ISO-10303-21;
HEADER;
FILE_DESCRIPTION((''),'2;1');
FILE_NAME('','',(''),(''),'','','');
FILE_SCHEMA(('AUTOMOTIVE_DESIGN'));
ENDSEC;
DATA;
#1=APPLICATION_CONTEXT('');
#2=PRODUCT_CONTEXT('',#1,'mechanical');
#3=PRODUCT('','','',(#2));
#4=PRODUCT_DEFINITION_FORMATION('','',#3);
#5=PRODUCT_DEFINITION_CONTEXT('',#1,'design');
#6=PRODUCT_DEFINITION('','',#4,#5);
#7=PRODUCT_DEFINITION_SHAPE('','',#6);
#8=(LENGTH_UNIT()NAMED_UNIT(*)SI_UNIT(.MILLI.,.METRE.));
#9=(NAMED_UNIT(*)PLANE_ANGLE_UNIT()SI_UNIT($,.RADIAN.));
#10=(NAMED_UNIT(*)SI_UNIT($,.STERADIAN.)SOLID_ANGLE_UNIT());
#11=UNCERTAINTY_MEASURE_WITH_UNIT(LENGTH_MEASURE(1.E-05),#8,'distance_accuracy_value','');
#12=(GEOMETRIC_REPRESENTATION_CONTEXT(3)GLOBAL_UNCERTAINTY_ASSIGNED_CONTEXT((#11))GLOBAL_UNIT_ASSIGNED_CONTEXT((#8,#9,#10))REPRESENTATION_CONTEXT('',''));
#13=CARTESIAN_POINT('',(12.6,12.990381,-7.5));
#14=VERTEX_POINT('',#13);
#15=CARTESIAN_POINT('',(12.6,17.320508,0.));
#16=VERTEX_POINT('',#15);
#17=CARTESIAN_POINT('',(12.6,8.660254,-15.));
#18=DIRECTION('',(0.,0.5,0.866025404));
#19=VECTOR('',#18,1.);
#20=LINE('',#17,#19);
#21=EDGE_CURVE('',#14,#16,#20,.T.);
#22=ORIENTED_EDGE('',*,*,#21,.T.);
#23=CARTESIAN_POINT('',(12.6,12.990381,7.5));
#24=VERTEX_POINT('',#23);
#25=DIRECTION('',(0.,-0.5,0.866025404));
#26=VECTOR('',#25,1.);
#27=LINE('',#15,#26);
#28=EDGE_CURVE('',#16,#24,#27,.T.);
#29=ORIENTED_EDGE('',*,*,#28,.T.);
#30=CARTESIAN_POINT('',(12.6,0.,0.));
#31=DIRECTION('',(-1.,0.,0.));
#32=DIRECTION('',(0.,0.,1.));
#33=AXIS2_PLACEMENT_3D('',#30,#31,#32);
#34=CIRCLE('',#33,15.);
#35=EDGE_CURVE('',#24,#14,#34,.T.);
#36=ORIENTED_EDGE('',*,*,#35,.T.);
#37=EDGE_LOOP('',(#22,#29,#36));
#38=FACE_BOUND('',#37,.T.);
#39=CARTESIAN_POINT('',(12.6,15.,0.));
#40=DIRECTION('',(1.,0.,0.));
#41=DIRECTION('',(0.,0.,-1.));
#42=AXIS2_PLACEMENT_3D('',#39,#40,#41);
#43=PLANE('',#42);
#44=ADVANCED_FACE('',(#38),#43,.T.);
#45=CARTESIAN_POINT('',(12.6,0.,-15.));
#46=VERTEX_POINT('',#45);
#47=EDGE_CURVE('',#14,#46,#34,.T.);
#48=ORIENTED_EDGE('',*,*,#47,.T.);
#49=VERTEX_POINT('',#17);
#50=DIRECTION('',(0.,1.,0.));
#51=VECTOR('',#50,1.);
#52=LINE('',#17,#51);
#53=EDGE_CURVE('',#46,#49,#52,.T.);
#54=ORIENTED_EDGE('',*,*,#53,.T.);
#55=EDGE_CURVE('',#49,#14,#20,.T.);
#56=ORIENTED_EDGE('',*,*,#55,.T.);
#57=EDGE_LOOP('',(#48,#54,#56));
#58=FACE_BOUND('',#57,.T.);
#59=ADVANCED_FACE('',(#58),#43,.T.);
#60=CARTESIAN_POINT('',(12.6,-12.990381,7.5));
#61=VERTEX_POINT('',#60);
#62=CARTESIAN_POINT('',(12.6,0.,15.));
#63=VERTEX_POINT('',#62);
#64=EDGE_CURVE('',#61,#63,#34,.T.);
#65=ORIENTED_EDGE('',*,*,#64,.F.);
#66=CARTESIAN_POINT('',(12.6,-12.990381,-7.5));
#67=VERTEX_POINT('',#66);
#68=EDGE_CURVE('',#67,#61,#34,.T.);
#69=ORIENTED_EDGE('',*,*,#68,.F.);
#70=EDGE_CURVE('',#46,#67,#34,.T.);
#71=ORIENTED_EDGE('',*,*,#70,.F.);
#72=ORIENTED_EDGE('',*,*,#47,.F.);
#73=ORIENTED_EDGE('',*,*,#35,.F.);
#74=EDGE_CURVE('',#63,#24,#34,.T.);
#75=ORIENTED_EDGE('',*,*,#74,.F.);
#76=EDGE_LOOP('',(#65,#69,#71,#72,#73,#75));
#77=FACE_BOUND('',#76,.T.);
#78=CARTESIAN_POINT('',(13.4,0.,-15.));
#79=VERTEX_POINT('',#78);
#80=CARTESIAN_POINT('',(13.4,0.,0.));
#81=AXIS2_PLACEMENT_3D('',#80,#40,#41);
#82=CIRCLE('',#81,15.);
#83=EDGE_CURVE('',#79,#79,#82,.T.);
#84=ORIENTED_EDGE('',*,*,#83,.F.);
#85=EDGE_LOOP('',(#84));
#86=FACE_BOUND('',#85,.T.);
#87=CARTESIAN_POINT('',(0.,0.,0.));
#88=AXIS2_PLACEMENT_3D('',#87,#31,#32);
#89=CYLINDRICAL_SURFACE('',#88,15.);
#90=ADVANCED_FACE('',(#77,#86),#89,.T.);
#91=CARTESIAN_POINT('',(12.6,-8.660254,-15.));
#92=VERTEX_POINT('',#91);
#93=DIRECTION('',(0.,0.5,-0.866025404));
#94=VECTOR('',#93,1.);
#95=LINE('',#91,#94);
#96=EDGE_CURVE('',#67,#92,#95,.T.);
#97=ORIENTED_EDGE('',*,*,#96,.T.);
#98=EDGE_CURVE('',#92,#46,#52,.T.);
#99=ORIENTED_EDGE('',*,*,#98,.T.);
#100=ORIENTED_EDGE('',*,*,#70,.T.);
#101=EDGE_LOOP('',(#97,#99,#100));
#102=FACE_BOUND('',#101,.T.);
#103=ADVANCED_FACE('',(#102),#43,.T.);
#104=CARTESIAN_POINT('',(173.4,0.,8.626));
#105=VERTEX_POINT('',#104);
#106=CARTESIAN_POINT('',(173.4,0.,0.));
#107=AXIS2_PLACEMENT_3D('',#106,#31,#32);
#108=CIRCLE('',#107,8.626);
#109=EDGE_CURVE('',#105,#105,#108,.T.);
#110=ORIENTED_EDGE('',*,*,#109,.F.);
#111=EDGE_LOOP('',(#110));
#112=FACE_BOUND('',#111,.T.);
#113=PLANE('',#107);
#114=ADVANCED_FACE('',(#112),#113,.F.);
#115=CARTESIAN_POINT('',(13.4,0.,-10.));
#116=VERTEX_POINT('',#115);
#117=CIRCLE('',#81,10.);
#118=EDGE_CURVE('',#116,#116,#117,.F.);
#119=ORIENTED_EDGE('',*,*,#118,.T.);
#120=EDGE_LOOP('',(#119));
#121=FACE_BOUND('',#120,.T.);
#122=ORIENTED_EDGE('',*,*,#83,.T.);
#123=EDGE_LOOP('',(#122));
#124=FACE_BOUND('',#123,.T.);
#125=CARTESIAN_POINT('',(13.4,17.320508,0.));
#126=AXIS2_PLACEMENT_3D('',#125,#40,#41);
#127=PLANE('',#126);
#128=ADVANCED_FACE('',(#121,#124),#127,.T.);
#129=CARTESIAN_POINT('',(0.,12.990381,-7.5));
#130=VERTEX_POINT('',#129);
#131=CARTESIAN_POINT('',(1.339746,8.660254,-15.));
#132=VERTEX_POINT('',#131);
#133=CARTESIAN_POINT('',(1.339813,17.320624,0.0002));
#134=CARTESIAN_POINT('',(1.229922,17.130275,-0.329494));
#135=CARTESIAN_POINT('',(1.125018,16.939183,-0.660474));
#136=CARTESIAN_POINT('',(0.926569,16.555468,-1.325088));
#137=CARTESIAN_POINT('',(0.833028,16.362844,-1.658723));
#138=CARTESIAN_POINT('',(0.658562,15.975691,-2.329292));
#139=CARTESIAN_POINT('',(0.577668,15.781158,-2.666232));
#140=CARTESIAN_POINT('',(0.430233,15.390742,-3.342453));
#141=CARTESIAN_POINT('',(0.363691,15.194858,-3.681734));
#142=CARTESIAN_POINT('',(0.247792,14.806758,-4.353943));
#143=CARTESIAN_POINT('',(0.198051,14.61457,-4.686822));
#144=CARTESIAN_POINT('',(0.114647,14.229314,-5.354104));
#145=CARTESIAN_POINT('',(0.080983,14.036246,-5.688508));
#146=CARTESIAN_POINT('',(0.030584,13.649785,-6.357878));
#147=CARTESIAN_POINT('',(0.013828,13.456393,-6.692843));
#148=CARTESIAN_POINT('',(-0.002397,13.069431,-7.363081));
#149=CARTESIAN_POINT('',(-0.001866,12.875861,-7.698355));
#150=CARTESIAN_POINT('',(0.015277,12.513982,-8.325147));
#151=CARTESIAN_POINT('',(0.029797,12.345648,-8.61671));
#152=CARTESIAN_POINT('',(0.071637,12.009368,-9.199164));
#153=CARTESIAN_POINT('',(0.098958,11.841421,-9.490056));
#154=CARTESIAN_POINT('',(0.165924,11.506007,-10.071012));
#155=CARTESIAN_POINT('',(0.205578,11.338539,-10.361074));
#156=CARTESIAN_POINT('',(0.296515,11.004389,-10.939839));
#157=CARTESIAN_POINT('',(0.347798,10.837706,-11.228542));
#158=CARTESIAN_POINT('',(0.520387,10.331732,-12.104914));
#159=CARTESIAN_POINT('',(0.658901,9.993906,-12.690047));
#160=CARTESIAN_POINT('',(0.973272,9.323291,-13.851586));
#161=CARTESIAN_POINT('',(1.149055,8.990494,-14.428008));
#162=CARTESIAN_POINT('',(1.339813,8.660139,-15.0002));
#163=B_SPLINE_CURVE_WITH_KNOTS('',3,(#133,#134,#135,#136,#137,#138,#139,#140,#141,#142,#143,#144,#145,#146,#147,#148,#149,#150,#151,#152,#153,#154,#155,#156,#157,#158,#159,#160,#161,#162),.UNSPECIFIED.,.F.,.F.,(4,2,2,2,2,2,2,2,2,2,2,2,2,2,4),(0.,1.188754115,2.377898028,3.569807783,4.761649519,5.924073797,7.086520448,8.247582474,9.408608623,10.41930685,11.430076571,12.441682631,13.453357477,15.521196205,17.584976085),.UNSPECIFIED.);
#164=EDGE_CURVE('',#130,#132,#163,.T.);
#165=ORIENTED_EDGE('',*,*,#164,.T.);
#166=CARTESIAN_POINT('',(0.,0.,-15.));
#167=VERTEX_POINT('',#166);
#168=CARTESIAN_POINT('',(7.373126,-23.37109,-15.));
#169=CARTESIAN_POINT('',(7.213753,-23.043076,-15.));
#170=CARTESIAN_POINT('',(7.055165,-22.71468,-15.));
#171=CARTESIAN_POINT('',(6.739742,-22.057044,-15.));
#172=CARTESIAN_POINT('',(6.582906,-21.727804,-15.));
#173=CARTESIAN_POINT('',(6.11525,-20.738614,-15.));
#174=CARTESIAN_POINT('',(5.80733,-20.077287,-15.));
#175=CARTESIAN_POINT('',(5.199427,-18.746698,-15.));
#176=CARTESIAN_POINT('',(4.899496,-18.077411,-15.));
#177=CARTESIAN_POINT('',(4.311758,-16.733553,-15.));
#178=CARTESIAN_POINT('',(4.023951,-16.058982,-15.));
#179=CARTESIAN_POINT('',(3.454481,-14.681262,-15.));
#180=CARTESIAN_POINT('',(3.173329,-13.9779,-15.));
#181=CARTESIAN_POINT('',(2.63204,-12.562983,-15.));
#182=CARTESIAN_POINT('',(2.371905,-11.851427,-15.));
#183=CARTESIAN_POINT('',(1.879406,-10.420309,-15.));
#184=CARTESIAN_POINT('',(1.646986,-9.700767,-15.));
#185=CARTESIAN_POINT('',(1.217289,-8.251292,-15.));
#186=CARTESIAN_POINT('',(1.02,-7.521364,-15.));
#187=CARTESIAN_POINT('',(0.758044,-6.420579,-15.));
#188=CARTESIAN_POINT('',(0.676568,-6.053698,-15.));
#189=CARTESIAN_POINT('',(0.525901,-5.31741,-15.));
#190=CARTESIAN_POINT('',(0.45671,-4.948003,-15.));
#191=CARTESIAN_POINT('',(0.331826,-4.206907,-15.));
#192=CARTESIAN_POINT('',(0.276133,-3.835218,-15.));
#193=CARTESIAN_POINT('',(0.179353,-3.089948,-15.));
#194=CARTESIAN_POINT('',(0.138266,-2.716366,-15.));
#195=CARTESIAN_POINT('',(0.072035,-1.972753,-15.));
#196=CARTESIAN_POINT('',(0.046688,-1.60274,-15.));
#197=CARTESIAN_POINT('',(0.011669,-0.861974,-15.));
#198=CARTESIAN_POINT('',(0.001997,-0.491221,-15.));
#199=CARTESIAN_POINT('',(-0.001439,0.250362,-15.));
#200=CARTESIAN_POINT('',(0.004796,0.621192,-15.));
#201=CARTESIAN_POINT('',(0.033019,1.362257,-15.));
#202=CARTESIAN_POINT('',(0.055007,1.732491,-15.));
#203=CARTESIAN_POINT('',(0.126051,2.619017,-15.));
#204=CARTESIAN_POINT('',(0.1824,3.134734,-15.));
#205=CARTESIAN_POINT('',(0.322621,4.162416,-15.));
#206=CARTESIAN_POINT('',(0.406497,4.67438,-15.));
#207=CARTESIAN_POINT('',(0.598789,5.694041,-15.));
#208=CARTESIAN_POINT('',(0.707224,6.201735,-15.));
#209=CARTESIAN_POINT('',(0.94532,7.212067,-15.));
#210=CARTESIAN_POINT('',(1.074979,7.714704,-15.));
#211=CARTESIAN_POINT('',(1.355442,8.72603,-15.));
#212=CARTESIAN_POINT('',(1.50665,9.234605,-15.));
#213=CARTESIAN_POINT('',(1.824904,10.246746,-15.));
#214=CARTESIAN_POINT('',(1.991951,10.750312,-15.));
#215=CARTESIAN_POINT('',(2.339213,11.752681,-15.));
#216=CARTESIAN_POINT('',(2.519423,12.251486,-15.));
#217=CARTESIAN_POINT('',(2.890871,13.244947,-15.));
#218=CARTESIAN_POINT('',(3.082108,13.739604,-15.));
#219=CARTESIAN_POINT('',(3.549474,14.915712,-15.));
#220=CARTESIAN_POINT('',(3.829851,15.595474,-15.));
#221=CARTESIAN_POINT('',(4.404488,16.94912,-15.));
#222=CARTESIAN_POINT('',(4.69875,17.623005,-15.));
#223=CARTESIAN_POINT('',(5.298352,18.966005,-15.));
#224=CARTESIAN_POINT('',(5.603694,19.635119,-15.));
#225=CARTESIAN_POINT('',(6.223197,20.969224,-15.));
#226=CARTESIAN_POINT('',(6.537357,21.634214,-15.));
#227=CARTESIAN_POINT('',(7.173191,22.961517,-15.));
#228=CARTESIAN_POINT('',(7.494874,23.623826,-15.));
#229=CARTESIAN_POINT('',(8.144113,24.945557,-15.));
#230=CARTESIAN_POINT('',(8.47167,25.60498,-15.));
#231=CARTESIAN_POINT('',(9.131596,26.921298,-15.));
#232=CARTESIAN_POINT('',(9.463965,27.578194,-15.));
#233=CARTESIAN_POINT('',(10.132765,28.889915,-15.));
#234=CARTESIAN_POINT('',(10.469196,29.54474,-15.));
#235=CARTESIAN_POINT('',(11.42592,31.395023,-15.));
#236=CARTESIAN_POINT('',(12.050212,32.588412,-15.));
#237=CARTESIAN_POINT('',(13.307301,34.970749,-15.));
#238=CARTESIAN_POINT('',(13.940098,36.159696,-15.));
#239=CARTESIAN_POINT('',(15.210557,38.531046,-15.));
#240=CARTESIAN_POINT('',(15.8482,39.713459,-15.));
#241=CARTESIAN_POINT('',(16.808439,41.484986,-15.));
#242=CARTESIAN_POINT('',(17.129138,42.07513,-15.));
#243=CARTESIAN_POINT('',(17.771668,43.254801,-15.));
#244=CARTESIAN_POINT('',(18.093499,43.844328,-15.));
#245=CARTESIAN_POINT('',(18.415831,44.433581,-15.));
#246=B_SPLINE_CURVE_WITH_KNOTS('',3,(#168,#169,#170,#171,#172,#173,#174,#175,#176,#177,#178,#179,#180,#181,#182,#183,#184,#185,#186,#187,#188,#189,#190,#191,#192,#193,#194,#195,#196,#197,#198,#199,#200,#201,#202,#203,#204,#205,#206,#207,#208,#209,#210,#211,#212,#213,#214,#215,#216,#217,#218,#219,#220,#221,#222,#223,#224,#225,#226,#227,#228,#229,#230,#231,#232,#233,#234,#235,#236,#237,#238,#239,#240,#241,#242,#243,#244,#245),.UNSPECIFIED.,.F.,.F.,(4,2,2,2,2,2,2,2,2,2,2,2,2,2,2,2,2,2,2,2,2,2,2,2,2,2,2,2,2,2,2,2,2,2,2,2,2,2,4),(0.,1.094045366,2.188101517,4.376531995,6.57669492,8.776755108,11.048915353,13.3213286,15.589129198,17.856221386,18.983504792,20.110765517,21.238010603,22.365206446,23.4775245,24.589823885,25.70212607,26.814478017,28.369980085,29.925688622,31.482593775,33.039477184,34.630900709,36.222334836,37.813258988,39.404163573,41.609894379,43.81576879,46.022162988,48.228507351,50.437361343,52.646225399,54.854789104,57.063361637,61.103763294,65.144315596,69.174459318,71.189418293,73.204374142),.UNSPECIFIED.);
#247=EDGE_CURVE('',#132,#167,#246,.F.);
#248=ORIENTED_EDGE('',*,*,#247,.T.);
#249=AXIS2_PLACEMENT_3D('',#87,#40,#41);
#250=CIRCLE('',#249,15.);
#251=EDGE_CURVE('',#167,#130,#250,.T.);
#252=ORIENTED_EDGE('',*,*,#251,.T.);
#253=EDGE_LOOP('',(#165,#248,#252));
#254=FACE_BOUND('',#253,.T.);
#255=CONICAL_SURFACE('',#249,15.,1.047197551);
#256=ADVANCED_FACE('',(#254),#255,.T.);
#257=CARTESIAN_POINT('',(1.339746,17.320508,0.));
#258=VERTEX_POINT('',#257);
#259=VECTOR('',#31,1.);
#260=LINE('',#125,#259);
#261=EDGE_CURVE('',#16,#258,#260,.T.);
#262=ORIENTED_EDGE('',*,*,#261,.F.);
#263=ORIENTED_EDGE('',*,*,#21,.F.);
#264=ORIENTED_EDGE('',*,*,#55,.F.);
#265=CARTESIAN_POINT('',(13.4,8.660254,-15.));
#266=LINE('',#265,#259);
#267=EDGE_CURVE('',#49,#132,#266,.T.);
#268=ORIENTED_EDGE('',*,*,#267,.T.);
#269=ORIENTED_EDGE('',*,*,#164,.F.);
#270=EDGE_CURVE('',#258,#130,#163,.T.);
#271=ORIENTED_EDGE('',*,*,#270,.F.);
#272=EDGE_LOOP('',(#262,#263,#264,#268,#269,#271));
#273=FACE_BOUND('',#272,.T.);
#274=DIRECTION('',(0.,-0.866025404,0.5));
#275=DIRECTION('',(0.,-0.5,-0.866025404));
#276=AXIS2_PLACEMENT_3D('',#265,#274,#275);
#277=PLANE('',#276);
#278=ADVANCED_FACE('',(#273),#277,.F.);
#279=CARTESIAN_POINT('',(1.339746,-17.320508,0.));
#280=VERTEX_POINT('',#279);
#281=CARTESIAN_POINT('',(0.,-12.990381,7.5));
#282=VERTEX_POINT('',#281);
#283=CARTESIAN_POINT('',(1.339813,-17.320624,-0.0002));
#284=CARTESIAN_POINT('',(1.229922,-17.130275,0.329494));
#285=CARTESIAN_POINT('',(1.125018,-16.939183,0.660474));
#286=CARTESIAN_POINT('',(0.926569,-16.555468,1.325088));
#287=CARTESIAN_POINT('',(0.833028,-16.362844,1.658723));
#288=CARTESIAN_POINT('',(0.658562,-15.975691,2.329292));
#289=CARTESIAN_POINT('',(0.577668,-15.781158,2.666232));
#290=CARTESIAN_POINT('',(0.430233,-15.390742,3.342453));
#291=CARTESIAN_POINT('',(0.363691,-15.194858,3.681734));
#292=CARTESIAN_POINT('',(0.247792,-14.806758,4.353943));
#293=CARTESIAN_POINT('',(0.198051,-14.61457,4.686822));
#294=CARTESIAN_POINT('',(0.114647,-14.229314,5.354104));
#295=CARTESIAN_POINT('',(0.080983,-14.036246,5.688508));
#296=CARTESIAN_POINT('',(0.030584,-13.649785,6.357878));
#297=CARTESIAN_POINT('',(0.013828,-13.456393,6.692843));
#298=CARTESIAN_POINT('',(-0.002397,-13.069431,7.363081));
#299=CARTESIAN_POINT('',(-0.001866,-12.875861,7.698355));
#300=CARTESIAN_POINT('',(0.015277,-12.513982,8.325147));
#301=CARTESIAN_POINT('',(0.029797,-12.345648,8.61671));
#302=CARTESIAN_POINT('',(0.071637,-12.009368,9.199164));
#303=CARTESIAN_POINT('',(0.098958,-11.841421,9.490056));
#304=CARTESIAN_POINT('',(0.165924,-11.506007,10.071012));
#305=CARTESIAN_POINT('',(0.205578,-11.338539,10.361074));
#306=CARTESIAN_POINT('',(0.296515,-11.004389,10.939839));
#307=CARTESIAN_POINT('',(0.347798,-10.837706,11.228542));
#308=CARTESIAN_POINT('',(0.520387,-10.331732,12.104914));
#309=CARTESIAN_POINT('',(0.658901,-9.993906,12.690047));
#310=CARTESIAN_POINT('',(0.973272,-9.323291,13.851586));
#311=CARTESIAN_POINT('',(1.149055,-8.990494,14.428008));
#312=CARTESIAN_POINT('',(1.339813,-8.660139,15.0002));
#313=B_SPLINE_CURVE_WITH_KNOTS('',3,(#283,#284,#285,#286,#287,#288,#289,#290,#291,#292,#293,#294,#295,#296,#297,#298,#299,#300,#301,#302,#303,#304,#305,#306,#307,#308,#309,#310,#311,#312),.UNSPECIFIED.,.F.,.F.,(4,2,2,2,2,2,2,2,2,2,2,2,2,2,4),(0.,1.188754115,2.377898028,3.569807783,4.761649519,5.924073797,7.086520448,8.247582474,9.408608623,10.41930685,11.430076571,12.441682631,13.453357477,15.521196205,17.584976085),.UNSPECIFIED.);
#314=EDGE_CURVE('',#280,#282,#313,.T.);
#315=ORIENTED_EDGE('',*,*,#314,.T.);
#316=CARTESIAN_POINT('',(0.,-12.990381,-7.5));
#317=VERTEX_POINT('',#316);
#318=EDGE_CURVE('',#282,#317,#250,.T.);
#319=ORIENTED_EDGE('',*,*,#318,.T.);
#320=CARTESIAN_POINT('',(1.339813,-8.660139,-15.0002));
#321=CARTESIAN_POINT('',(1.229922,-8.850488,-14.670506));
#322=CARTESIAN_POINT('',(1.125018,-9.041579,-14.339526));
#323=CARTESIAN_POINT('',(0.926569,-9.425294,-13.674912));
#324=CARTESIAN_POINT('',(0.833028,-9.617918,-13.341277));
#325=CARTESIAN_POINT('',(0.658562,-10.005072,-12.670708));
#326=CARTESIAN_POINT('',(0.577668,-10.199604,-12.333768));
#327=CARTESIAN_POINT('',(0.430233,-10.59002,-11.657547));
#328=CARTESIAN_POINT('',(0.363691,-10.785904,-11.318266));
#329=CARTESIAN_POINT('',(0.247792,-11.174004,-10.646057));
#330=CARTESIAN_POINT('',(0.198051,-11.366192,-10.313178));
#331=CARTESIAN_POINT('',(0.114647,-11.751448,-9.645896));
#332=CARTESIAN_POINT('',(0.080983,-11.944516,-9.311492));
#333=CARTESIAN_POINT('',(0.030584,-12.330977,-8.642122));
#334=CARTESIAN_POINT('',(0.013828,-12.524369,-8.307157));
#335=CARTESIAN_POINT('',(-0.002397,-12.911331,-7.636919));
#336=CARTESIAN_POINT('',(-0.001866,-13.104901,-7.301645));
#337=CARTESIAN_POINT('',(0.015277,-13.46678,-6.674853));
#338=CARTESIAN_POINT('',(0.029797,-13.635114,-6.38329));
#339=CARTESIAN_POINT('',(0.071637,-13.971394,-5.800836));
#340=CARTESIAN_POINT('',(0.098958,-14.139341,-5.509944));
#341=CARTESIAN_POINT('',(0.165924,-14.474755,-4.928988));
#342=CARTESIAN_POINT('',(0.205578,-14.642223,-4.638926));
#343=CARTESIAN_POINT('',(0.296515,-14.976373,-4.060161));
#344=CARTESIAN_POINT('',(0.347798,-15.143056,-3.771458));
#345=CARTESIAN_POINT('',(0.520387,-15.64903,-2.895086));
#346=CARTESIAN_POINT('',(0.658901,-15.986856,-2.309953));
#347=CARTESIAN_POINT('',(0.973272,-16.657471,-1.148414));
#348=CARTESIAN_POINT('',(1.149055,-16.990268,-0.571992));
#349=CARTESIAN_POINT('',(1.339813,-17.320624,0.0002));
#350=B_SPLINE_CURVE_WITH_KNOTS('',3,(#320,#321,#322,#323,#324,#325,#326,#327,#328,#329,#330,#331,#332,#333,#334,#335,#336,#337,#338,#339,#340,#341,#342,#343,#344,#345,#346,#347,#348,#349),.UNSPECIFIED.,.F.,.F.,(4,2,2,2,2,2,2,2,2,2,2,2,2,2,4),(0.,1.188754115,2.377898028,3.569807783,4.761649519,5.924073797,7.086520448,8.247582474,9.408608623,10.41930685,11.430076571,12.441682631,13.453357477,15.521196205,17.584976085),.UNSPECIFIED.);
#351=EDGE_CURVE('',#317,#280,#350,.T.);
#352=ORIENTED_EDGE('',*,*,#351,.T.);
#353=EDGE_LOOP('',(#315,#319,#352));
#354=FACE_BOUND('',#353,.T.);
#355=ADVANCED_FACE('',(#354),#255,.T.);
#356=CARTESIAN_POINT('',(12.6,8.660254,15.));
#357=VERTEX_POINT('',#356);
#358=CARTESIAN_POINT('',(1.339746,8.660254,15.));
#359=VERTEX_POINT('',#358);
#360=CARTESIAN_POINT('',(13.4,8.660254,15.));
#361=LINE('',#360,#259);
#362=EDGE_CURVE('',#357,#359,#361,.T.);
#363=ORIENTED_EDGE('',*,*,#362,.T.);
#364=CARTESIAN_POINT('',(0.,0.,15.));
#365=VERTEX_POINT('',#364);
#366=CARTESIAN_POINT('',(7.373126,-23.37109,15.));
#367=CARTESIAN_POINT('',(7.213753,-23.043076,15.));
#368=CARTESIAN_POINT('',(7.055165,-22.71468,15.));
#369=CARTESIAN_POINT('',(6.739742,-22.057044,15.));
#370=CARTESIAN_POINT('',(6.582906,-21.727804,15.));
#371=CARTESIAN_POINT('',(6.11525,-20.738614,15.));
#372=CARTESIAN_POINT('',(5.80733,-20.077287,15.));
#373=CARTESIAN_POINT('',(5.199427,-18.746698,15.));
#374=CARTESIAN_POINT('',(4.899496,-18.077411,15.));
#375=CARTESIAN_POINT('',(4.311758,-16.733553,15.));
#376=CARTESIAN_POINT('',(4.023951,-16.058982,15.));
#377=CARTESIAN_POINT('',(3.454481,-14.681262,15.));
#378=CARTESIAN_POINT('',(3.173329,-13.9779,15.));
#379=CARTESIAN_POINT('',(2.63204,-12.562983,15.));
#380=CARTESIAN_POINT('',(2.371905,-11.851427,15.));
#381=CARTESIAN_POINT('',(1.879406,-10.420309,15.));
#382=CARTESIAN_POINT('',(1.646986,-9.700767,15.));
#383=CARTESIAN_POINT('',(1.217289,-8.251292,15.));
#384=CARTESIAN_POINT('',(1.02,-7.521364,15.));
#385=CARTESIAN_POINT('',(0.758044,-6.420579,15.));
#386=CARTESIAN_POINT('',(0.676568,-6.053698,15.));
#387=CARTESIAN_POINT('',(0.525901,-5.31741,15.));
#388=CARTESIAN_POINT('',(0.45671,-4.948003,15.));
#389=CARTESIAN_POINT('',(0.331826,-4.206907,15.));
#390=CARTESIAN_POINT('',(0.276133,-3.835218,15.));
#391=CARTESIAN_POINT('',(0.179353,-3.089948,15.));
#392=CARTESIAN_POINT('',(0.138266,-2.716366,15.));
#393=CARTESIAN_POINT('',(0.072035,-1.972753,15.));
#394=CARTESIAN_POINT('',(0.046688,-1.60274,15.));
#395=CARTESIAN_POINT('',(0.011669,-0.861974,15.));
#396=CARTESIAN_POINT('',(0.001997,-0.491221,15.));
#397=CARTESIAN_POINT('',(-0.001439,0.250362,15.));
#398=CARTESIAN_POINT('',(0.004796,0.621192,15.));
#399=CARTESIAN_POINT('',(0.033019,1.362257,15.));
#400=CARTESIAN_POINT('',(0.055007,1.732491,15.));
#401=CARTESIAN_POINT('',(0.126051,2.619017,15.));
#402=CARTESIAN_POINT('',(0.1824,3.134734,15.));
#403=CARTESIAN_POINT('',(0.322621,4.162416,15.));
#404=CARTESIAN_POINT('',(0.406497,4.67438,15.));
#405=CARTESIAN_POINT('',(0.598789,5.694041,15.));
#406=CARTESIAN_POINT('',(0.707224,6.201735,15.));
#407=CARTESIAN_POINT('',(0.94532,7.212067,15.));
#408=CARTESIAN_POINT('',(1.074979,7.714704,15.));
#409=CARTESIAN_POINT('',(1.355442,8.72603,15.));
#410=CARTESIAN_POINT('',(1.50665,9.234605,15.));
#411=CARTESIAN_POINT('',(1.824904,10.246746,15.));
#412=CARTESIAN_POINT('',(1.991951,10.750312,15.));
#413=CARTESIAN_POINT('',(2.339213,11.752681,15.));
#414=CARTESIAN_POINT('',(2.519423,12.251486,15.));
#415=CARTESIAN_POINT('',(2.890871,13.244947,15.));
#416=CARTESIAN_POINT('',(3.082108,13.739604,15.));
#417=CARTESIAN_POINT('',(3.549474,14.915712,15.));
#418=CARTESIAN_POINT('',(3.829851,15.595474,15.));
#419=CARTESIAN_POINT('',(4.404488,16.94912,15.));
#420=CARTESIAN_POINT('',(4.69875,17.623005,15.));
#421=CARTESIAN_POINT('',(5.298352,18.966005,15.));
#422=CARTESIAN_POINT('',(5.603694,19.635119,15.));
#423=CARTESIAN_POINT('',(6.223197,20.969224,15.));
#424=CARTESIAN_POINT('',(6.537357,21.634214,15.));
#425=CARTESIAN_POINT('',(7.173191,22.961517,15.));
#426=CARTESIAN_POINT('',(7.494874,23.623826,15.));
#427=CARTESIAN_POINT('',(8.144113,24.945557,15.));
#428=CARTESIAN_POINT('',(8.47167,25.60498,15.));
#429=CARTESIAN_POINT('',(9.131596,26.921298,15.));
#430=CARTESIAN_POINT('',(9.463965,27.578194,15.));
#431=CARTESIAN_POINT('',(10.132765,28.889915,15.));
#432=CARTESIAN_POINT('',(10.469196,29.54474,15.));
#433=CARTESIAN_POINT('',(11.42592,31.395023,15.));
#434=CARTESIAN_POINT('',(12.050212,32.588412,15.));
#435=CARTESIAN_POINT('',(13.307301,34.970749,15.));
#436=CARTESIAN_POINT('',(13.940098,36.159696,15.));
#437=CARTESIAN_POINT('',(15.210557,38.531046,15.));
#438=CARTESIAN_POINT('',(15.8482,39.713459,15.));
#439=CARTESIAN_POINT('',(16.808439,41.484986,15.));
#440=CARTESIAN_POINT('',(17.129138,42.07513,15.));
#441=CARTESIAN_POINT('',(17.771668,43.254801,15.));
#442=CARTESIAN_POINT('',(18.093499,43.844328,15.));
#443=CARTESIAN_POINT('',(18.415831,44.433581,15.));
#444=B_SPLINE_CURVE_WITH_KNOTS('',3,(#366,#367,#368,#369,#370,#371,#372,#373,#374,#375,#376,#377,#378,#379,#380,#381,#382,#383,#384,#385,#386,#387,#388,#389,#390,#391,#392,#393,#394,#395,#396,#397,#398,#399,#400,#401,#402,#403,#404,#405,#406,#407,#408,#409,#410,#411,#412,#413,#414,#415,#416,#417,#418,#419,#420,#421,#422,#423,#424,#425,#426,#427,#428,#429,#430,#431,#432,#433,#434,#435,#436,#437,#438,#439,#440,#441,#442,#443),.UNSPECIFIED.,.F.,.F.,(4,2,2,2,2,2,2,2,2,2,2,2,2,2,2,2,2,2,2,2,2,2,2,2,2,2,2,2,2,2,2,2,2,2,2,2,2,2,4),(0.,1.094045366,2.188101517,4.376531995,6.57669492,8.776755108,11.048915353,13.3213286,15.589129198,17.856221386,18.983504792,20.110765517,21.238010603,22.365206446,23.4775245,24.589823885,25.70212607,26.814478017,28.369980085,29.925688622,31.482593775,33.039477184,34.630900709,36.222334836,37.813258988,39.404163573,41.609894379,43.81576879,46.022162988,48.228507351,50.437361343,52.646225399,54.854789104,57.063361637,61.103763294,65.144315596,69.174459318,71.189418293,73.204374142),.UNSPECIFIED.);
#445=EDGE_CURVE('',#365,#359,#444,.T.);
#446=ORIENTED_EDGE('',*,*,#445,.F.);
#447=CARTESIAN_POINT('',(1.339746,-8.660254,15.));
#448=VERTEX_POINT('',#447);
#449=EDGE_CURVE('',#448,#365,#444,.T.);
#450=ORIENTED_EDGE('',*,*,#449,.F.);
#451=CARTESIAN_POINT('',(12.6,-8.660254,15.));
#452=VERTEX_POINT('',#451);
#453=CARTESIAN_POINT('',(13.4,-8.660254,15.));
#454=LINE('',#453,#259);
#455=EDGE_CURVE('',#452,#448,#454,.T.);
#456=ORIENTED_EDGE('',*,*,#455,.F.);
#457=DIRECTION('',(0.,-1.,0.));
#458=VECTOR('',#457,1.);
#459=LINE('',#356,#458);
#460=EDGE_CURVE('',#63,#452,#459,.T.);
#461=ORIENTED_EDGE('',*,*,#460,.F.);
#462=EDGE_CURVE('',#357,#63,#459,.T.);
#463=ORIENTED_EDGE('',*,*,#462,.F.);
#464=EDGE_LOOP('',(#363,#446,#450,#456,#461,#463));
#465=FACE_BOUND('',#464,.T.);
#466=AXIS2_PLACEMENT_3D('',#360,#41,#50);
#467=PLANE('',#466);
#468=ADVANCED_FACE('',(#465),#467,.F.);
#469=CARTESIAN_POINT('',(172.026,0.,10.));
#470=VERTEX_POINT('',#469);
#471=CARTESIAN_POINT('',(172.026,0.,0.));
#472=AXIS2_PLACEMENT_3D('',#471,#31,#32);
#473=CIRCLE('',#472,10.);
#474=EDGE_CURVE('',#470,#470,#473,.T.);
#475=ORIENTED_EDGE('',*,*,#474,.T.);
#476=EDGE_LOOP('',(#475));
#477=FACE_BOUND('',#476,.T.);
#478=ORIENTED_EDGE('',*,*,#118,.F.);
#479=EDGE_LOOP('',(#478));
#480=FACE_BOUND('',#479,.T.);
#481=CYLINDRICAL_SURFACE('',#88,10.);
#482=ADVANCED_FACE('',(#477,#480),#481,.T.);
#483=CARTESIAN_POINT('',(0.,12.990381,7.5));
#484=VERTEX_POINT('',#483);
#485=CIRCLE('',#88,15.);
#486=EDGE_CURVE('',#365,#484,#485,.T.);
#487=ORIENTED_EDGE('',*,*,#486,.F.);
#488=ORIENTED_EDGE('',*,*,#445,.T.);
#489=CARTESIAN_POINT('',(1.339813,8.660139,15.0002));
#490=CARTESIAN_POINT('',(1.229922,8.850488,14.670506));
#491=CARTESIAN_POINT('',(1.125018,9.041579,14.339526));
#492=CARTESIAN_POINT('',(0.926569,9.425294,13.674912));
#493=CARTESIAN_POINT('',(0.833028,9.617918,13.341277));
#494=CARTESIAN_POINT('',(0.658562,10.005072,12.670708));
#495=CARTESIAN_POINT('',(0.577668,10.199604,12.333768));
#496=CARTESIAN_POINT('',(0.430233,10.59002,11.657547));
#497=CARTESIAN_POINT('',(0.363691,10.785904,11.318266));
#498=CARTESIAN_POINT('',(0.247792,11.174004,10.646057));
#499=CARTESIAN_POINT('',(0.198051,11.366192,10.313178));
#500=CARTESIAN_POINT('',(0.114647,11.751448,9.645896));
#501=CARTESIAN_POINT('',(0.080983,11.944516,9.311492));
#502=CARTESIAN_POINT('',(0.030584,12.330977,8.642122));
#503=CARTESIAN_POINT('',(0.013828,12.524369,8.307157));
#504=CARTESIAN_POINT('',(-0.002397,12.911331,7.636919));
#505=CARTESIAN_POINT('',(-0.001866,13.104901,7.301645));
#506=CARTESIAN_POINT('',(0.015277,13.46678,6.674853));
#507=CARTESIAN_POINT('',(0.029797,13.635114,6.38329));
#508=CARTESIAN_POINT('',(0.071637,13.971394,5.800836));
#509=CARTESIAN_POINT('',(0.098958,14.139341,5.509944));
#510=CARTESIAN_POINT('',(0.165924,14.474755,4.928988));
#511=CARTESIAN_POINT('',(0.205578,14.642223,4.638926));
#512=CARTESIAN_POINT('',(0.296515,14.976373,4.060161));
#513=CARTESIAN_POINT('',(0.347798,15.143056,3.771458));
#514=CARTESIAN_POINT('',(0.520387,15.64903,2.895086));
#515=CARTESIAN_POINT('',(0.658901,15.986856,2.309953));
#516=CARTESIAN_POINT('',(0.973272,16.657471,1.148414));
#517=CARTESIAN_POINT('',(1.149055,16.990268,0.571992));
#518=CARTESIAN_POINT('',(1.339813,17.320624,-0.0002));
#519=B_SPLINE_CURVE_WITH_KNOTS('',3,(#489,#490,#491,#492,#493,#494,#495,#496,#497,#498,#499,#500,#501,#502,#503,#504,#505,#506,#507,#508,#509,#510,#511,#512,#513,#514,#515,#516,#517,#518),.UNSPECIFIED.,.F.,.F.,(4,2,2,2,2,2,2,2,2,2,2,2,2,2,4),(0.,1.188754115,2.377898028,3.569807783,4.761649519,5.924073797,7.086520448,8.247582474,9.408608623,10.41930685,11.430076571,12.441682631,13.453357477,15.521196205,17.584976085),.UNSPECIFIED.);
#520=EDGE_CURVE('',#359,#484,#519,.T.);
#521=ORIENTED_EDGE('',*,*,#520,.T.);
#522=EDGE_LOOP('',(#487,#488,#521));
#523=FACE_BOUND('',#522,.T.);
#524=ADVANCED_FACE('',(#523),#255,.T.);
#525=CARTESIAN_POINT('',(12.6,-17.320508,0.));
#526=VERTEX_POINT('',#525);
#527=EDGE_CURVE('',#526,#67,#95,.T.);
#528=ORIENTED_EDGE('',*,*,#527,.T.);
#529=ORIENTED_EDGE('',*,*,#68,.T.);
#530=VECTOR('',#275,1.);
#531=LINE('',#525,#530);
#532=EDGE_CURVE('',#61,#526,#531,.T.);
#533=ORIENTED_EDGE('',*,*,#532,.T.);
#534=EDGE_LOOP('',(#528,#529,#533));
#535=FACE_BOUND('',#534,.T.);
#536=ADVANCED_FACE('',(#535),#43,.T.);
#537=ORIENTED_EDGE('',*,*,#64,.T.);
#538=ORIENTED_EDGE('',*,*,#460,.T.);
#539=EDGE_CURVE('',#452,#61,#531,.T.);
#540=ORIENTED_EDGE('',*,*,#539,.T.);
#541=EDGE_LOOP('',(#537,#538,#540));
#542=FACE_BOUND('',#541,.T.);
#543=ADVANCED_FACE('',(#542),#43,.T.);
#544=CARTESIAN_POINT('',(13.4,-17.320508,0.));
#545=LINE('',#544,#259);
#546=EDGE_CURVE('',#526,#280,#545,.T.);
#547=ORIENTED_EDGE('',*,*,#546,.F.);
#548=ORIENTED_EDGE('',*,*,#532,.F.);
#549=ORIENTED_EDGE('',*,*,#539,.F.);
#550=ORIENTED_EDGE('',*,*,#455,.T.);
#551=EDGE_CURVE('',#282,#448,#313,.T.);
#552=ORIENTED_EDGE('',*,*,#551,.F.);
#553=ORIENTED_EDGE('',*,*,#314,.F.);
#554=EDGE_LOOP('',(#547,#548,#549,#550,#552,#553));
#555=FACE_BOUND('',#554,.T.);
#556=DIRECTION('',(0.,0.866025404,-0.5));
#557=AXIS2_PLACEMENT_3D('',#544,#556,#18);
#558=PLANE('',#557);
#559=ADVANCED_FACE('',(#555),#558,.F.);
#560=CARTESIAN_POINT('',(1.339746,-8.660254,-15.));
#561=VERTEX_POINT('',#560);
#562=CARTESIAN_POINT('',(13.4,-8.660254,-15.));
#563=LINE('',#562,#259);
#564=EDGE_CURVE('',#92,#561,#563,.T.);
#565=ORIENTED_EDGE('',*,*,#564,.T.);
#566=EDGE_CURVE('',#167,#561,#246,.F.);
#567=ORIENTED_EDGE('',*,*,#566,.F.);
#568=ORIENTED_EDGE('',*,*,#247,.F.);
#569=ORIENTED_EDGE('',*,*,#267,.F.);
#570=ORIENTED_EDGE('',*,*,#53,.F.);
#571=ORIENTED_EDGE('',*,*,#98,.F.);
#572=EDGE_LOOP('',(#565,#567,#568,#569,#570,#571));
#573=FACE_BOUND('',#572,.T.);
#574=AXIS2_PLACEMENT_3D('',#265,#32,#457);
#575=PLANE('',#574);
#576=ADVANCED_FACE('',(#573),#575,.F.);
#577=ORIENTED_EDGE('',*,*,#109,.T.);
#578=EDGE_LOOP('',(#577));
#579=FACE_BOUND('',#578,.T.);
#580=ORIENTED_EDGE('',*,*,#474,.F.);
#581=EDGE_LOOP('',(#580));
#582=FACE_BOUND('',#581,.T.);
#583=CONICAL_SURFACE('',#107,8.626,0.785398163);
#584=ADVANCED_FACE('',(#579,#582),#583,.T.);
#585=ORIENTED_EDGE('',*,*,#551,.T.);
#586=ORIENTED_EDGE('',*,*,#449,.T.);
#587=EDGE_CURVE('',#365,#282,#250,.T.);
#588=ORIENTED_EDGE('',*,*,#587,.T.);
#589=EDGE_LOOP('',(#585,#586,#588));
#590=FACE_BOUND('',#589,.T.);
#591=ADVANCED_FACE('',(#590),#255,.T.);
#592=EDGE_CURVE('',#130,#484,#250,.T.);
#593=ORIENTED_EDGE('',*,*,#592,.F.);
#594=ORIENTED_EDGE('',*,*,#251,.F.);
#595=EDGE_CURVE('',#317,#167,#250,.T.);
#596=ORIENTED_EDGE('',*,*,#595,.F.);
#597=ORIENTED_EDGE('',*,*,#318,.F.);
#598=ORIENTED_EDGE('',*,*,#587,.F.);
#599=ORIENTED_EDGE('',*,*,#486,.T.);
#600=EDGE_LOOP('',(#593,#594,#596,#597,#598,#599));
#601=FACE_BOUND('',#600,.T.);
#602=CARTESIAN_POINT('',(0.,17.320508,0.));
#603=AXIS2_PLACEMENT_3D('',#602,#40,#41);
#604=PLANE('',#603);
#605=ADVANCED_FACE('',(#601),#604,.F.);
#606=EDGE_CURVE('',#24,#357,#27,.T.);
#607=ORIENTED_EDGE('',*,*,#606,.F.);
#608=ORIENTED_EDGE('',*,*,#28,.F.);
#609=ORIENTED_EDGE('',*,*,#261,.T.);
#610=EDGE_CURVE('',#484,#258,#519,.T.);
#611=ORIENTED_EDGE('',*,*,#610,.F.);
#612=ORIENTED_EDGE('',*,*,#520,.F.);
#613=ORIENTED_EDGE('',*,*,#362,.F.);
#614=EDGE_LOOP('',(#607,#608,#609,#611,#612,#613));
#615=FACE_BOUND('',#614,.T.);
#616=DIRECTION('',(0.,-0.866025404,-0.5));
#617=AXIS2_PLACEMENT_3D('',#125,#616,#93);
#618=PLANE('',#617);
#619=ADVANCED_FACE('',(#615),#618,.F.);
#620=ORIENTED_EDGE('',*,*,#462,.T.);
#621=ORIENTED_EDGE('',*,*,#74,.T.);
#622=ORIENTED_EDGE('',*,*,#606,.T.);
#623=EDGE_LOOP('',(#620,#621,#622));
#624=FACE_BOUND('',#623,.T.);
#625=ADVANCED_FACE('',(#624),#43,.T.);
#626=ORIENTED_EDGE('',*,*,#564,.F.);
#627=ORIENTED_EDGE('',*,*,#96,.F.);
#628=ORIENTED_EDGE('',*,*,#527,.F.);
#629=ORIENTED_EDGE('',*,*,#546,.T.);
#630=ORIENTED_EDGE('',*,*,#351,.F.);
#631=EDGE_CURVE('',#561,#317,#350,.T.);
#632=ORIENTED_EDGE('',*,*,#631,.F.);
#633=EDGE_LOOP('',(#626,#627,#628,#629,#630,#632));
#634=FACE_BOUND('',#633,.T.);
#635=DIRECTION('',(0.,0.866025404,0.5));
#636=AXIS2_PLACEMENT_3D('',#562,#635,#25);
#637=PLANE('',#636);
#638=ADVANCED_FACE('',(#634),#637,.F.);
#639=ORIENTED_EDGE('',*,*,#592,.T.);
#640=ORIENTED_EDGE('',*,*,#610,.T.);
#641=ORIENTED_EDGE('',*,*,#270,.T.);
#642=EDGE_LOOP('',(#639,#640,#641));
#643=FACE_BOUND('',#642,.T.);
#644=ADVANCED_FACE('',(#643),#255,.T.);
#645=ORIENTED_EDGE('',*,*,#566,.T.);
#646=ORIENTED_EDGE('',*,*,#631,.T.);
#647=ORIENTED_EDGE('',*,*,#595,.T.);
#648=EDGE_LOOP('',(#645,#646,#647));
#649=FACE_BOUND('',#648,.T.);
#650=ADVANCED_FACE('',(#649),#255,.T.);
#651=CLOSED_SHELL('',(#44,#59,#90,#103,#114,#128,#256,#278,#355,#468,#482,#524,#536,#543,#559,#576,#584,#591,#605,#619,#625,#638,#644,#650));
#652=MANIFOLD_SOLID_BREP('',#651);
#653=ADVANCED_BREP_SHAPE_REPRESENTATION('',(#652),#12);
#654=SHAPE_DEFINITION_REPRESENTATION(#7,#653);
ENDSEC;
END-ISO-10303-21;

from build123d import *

# Parameters (mm, degrees)
BASEHEAD_DEPTH = 13.4
SKETCH4_W      = 0.8
SKETCH4_H      = 12.320508076


# Read off the part's stored shape, not the designer's step: HeadChamfer
with BuildPart() as part:
    # Sketch1 → BaseHead (new body)
    with BuildSketch(Plane(origin=(0, 0, 0), x_dir=(0, 0, -1), z_dir=(1, 0, 0))):
        Polygon((15, 8.660254038), (15, -8.660254038), (0, -17.320508076), (-15, -8.660254038), (-15, 8.660254038), (0, 17.320508076), align=None)
    extrude(amount=BASEHEAD_DEPTH)

    # HeadChamfer outline → HeadChamfer (revolve, cut)
    with BuildSketch(Plane.YX):
        Polygon((17.320508077, 1.339745963), (14.99999979, -1.21e-07), (17.320508077, -1.21e-07), align=None)
    revolve(axis=Axis((0, 0, 0), (1, 0, 0)), mode=Mode.SUBTRACT)

    # HeadChamfer 2 outline → HeadChamfer 2 (revolve)
    with BuildSketch(Plane.YX):
        Polygon((10, 13.4), (10, 172.026), (8.626, 173.4), (0, 173.4), (0, 13.4), align=None)
    revolve(axis=Axis((0, 0, 0), (1, 0, 0)))

    # Sketch4 → BearingFace (revolve, cut)
    with BuildSketch(Plane.XY, mode=Mode.PRIVATE) as bearingface_sk:
        with Locations((13, 21.160254038)):
            Rectangle(SKETCH4_W, SKETCH4_H)
    revolve(bearingface_sk.sketch.rotate(Axis((0, 0, 0), (1, 0, 0)), 90), axis=Axis((0, 0, 0), (1, 0, 0)), mode=Mode.SUBTRACT)


solid = part.part
